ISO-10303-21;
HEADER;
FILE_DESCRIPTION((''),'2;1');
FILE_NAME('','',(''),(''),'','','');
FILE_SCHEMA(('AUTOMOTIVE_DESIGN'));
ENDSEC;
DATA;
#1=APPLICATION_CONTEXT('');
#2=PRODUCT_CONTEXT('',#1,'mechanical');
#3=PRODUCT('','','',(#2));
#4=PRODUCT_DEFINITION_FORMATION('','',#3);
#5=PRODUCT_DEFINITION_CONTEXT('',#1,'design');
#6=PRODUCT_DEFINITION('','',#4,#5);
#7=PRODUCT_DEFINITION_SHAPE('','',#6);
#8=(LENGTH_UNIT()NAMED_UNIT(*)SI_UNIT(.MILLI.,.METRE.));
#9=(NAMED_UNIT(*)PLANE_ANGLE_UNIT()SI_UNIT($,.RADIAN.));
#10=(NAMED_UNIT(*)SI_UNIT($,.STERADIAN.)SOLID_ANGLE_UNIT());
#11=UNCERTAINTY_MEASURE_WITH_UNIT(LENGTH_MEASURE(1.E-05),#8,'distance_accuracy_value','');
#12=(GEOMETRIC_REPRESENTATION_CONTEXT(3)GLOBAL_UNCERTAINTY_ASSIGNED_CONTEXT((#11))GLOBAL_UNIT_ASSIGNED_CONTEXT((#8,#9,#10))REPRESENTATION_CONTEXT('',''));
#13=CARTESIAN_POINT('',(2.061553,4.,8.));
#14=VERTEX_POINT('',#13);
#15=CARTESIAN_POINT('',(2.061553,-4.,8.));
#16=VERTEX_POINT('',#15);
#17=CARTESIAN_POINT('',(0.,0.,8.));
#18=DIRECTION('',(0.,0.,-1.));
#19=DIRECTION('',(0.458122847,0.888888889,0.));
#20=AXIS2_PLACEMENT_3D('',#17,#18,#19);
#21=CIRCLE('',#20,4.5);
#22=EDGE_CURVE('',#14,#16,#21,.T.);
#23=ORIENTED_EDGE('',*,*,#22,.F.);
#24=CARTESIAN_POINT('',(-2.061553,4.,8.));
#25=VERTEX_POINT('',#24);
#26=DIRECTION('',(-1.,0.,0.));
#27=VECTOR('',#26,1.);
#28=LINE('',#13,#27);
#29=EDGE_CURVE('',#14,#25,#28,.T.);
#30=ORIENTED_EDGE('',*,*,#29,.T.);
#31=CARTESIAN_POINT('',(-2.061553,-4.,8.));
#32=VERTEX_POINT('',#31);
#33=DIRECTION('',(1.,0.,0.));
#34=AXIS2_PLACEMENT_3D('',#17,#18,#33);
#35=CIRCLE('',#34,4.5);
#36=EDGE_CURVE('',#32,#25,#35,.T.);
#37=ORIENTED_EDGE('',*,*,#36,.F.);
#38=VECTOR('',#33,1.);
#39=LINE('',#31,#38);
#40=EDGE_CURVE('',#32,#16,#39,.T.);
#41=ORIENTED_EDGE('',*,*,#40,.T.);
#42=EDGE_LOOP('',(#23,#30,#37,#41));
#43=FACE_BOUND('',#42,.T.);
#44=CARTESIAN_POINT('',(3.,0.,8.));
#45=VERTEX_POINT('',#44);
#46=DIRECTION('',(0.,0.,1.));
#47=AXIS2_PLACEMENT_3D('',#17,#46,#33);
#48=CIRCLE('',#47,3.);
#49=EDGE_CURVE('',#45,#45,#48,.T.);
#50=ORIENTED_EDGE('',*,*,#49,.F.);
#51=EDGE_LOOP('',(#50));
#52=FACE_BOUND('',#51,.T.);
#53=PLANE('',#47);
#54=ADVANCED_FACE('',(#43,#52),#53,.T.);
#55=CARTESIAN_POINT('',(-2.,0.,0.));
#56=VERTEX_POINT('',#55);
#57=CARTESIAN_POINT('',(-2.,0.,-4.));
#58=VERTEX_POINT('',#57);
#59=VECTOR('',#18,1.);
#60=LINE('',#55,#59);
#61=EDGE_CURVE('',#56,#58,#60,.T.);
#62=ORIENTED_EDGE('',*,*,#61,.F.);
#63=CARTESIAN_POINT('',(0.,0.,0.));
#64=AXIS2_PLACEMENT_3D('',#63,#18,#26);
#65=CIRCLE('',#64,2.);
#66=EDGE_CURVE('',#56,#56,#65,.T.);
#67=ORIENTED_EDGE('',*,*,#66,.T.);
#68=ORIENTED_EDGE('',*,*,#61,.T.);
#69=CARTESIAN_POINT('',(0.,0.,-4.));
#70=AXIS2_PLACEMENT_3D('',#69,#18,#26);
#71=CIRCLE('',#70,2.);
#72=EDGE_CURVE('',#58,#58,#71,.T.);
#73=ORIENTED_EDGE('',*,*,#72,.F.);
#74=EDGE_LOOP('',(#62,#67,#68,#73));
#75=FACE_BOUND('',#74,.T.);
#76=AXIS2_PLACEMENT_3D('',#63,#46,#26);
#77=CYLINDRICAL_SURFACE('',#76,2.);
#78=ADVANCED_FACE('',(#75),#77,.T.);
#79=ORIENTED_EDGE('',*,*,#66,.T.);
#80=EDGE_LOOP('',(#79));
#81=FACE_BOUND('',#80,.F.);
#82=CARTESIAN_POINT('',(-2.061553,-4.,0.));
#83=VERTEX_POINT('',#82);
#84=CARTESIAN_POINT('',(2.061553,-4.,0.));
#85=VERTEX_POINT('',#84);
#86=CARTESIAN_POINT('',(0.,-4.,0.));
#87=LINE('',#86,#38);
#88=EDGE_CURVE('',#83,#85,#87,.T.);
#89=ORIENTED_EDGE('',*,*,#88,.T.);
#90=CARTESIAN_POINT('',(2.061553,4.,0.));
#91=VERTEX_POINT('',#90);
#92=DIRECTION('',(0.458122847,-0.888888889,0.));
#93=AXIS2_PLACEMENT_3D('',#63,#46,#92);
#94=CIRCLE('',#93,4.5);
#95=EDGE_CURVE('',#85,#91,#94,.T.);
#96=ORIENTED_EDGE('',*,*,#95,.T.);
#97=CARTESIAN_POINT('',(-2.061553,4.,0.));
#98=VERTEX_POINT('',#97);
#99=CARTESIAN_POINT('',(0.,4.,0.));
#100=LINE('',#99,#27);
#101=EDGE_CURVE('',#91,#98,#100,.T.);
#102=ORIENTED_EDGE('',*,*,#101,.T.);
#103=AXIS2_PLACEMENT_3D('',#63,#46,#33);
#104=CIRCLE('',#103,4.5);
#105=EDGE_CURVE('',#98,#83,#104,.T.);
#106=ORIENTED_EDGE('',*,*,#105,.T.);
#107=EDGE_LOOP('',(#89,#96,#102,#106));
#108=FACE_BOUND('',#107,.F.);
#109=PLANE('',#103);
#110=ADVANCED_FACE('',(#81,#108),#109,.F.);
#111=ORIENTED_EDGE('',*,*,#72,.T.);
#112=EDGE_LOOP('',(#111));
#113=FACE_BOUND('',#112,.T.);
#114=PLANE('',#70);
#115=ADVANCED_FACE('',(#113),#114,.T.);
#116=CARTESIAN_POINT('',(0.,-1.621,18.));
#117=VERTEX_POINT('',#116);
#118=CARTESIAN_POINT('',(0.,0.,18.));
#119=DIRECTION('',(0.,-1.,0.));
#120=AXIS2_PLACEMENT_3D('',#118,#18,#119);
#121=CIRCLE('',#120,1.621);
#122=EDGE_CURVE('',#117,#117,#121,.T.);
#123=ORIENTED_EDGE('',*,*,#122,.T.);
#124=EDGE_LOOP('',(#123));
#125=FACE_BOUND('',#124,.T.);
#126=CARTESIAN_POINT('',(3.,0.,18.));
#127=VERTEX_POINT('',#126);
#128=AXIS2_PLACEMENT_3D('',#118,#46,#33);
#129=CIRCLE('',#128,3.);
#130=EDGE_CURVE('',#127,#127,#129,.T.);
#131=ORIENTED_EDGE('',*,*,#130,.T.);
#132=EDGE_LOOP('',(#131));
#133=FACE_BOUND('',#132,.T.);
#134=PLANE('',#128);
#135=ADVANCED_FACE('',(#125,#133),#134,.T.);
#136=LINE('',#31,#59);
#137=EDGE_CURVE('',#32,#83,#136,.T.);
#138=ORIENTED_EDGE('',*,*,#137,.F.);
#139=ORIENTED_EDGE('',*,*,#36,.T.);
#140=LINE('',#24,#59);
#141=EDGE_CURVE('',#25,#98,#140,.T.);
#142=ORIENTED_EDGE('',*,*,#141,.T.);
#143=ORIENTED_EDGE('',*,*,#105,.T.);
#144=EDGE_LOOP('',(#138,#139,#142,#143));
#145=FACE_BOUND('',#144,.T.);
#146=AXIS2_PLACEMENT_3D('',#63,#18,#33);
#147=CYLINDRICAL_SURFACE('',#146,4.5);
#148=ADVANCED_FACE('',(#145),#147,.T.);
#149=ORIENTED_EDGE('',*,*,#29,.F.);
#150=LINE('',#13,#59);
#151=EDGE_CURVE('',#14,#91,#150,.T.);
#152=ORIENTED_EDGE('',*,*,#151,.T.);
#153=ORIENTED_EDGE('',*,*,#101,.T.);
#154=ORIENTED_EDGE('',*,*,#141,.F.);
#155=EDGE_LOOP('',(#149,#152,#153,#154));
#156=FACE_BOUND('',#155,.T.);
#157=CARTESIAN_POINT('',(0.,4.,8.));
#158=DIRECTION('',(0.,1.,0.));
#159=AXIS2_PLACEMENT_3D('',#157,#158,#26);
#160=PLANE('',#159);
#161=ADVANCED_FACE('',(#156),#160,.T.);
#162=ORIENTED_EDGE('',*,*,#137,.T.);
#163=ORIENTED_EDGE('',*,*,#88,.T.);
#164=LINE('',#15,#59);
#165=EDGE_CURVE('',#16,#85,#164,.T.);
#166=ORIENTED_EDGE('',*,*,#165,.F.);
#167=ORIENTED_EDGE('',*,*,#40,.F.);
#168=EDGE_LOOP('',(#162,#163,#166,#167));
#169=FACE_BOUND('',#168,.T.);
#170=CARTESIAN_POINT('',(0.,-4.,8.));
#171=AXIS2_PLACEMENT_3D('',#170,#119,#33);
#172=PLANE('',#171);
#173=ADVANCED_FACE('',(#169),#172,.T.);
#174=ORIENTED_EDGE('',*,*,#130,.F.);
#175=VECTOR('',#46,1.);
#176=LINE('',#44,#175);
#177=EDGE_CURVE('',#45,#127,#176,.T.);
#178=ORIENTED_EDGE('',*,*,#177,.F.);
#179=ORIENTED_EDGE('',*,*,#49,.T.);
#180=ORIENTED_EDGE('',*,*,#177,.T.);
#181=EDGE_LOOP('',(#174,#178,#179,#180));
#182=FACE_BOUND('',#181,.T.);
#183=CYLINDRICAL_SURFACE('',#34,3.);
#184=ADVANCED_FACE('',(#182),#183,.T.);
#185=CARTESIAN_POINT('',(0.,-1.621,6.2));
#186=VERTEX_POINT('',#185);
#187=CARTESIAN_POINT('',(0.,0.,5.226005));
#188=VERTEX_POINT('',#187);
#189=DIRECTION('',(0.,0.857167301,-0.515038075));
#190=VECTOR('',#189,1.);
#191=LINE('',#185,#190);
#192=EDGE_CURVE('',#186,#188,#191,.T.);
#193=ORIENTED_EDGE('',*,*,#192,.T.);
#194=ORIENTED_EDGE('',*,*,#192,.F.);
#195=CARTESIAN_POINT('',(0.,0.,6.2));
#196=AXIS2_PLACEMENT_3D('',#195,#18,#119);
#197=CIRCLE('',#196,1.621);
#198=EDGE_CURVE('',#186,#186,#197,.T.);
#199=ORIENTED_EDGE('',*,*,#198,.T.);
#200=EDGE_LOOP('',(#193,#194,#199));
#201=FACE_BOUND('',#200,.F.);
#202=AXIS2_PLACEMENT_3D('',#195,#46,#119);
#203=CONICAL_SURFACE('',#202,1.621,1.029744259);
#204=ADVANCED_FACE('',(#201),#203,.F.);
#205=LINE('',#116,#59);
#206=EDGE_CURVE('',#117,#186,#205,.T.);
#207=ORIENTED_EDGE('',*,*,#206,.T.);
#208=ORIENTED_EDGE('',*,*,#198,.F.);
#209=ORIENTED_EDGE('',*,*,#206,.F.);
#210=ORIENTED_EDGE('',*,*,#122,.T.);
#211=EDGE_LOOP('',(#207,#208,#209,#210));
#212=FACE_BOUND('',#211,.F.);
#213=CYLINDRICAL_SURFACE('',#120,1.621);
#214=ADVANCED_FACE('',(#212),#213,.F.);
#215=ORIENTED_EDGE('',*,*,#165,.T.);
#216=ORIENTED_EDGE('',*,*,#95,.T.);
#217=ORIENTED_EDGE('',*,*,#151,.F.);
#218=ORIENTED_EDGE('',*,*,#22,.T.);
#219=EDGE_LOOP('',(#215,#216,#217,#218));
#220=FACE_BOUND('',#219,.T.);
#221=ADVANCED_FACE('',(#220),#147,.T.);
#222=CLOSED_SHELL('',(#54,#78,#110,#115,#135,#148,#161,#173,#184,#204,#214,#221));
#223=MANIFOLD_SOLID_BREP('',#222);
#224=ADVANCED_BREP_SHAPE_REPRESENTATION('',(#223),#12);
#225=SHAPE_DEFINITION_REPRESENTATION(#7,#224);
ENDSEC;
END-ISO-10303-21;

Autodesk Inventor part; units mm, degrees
ref_plane "YZ Plane" through (0, 0, 0) normal (1, 0, 0) x (0, 1, 0)
ref_plane "XZ Plane" through (0, 0, 0) normal (0, 1, 0) x (-1, 0, 0)
ref_plane "XY Plane" through (0, 0, 0) normal (0, 0, 1) x (1, 0, 0)
sketch "Skizze1" plane through (0, 0, 0) normal (0, 0, 1) x (1, 0, 0)
  line L0 (-6.3, 0) -> (6.3, 0) projected
  line L1 (0, -6.3) -> (0, 6.3) projected
  circle A0 centre (0, 0) radius 4.5
  dimension "d0" = 9
extrude "Extrusion1" add sketch "Skizze1" along normal blind 8
sketch "Skizze2" plane through (0, 0, 0) normal (0, 0, -1) x (-1, 0, 0)
  circle A0 centre (0, 0) radius 4.5 projected
  circle A1 centre (0, 0) radius 2
  dimension "d3" = 4
extrude "Extrusion2" add sketch "Skizze2" along normal blind 4 contours A1
thread "Gewinde1" size "M4x0.7" class "6g" standard "ANSI Metric M Profile" full length
sketch "Skizze3" plane through (0, 0, 8) normal (0, 0, 1) x (1, 0, 0)
  circle A0 centre (0, 0) radius 3
  dimension "d8" = 6
extrude "Extrusion3" add sketch "Skizze3" along normal blind 10
sketch "Skizze4" plane through (0, 0, 8) normal (0, 0, 1) x (1, 0, 0)
  circle A0 centre (0, 0) radius 3 projected
  circle A1 centre (0, 0) radius 4.5 projected
  line L0 (-16.8, 0) -> (16.8, 0) projected
  line L1 (0, -6.3) -> (0, 6.3) projected
  line L2 (12, 4) -> (-12, 4)
  line L3 (-12, 4) -> (-12, -4)
  line L4 (-12, -4) -> (12, -4)
  line L5 (12, -4) -> (12, 4)
  line L6 (12, 4) -> (-12, -4) construction
  line L7 (-12, 4) -> (12, -4) construction
  point P0 (-2.0616, 4)
  point P1 (2.0616, 4)
  point P2 (-2.0616, -4)
  point P3 (2.0616, -4)
  dimension "d11" = 8
extrude "Extrusion4" cut sketch "Skizze4" against normal blind 10 contours L2 A1 L1 | L1 A1 L2 | L4 A1 L1 | L1 A1 L4
sketch "Skizze5" plane through (0, 0, 18) normal (0, 0, 1) x (1, 0, 0)
  circle A0 centre (0, 0) radius 2 projected
hole "Bohrung1" at (0, 0, 18) direction (0, 0, -1) diameter 3.242 depth 11.8 tip angle 118 thread size "M4x0.7" class "6H" standard "ISO Metric profile"
properties part number "24_0497_0022"
